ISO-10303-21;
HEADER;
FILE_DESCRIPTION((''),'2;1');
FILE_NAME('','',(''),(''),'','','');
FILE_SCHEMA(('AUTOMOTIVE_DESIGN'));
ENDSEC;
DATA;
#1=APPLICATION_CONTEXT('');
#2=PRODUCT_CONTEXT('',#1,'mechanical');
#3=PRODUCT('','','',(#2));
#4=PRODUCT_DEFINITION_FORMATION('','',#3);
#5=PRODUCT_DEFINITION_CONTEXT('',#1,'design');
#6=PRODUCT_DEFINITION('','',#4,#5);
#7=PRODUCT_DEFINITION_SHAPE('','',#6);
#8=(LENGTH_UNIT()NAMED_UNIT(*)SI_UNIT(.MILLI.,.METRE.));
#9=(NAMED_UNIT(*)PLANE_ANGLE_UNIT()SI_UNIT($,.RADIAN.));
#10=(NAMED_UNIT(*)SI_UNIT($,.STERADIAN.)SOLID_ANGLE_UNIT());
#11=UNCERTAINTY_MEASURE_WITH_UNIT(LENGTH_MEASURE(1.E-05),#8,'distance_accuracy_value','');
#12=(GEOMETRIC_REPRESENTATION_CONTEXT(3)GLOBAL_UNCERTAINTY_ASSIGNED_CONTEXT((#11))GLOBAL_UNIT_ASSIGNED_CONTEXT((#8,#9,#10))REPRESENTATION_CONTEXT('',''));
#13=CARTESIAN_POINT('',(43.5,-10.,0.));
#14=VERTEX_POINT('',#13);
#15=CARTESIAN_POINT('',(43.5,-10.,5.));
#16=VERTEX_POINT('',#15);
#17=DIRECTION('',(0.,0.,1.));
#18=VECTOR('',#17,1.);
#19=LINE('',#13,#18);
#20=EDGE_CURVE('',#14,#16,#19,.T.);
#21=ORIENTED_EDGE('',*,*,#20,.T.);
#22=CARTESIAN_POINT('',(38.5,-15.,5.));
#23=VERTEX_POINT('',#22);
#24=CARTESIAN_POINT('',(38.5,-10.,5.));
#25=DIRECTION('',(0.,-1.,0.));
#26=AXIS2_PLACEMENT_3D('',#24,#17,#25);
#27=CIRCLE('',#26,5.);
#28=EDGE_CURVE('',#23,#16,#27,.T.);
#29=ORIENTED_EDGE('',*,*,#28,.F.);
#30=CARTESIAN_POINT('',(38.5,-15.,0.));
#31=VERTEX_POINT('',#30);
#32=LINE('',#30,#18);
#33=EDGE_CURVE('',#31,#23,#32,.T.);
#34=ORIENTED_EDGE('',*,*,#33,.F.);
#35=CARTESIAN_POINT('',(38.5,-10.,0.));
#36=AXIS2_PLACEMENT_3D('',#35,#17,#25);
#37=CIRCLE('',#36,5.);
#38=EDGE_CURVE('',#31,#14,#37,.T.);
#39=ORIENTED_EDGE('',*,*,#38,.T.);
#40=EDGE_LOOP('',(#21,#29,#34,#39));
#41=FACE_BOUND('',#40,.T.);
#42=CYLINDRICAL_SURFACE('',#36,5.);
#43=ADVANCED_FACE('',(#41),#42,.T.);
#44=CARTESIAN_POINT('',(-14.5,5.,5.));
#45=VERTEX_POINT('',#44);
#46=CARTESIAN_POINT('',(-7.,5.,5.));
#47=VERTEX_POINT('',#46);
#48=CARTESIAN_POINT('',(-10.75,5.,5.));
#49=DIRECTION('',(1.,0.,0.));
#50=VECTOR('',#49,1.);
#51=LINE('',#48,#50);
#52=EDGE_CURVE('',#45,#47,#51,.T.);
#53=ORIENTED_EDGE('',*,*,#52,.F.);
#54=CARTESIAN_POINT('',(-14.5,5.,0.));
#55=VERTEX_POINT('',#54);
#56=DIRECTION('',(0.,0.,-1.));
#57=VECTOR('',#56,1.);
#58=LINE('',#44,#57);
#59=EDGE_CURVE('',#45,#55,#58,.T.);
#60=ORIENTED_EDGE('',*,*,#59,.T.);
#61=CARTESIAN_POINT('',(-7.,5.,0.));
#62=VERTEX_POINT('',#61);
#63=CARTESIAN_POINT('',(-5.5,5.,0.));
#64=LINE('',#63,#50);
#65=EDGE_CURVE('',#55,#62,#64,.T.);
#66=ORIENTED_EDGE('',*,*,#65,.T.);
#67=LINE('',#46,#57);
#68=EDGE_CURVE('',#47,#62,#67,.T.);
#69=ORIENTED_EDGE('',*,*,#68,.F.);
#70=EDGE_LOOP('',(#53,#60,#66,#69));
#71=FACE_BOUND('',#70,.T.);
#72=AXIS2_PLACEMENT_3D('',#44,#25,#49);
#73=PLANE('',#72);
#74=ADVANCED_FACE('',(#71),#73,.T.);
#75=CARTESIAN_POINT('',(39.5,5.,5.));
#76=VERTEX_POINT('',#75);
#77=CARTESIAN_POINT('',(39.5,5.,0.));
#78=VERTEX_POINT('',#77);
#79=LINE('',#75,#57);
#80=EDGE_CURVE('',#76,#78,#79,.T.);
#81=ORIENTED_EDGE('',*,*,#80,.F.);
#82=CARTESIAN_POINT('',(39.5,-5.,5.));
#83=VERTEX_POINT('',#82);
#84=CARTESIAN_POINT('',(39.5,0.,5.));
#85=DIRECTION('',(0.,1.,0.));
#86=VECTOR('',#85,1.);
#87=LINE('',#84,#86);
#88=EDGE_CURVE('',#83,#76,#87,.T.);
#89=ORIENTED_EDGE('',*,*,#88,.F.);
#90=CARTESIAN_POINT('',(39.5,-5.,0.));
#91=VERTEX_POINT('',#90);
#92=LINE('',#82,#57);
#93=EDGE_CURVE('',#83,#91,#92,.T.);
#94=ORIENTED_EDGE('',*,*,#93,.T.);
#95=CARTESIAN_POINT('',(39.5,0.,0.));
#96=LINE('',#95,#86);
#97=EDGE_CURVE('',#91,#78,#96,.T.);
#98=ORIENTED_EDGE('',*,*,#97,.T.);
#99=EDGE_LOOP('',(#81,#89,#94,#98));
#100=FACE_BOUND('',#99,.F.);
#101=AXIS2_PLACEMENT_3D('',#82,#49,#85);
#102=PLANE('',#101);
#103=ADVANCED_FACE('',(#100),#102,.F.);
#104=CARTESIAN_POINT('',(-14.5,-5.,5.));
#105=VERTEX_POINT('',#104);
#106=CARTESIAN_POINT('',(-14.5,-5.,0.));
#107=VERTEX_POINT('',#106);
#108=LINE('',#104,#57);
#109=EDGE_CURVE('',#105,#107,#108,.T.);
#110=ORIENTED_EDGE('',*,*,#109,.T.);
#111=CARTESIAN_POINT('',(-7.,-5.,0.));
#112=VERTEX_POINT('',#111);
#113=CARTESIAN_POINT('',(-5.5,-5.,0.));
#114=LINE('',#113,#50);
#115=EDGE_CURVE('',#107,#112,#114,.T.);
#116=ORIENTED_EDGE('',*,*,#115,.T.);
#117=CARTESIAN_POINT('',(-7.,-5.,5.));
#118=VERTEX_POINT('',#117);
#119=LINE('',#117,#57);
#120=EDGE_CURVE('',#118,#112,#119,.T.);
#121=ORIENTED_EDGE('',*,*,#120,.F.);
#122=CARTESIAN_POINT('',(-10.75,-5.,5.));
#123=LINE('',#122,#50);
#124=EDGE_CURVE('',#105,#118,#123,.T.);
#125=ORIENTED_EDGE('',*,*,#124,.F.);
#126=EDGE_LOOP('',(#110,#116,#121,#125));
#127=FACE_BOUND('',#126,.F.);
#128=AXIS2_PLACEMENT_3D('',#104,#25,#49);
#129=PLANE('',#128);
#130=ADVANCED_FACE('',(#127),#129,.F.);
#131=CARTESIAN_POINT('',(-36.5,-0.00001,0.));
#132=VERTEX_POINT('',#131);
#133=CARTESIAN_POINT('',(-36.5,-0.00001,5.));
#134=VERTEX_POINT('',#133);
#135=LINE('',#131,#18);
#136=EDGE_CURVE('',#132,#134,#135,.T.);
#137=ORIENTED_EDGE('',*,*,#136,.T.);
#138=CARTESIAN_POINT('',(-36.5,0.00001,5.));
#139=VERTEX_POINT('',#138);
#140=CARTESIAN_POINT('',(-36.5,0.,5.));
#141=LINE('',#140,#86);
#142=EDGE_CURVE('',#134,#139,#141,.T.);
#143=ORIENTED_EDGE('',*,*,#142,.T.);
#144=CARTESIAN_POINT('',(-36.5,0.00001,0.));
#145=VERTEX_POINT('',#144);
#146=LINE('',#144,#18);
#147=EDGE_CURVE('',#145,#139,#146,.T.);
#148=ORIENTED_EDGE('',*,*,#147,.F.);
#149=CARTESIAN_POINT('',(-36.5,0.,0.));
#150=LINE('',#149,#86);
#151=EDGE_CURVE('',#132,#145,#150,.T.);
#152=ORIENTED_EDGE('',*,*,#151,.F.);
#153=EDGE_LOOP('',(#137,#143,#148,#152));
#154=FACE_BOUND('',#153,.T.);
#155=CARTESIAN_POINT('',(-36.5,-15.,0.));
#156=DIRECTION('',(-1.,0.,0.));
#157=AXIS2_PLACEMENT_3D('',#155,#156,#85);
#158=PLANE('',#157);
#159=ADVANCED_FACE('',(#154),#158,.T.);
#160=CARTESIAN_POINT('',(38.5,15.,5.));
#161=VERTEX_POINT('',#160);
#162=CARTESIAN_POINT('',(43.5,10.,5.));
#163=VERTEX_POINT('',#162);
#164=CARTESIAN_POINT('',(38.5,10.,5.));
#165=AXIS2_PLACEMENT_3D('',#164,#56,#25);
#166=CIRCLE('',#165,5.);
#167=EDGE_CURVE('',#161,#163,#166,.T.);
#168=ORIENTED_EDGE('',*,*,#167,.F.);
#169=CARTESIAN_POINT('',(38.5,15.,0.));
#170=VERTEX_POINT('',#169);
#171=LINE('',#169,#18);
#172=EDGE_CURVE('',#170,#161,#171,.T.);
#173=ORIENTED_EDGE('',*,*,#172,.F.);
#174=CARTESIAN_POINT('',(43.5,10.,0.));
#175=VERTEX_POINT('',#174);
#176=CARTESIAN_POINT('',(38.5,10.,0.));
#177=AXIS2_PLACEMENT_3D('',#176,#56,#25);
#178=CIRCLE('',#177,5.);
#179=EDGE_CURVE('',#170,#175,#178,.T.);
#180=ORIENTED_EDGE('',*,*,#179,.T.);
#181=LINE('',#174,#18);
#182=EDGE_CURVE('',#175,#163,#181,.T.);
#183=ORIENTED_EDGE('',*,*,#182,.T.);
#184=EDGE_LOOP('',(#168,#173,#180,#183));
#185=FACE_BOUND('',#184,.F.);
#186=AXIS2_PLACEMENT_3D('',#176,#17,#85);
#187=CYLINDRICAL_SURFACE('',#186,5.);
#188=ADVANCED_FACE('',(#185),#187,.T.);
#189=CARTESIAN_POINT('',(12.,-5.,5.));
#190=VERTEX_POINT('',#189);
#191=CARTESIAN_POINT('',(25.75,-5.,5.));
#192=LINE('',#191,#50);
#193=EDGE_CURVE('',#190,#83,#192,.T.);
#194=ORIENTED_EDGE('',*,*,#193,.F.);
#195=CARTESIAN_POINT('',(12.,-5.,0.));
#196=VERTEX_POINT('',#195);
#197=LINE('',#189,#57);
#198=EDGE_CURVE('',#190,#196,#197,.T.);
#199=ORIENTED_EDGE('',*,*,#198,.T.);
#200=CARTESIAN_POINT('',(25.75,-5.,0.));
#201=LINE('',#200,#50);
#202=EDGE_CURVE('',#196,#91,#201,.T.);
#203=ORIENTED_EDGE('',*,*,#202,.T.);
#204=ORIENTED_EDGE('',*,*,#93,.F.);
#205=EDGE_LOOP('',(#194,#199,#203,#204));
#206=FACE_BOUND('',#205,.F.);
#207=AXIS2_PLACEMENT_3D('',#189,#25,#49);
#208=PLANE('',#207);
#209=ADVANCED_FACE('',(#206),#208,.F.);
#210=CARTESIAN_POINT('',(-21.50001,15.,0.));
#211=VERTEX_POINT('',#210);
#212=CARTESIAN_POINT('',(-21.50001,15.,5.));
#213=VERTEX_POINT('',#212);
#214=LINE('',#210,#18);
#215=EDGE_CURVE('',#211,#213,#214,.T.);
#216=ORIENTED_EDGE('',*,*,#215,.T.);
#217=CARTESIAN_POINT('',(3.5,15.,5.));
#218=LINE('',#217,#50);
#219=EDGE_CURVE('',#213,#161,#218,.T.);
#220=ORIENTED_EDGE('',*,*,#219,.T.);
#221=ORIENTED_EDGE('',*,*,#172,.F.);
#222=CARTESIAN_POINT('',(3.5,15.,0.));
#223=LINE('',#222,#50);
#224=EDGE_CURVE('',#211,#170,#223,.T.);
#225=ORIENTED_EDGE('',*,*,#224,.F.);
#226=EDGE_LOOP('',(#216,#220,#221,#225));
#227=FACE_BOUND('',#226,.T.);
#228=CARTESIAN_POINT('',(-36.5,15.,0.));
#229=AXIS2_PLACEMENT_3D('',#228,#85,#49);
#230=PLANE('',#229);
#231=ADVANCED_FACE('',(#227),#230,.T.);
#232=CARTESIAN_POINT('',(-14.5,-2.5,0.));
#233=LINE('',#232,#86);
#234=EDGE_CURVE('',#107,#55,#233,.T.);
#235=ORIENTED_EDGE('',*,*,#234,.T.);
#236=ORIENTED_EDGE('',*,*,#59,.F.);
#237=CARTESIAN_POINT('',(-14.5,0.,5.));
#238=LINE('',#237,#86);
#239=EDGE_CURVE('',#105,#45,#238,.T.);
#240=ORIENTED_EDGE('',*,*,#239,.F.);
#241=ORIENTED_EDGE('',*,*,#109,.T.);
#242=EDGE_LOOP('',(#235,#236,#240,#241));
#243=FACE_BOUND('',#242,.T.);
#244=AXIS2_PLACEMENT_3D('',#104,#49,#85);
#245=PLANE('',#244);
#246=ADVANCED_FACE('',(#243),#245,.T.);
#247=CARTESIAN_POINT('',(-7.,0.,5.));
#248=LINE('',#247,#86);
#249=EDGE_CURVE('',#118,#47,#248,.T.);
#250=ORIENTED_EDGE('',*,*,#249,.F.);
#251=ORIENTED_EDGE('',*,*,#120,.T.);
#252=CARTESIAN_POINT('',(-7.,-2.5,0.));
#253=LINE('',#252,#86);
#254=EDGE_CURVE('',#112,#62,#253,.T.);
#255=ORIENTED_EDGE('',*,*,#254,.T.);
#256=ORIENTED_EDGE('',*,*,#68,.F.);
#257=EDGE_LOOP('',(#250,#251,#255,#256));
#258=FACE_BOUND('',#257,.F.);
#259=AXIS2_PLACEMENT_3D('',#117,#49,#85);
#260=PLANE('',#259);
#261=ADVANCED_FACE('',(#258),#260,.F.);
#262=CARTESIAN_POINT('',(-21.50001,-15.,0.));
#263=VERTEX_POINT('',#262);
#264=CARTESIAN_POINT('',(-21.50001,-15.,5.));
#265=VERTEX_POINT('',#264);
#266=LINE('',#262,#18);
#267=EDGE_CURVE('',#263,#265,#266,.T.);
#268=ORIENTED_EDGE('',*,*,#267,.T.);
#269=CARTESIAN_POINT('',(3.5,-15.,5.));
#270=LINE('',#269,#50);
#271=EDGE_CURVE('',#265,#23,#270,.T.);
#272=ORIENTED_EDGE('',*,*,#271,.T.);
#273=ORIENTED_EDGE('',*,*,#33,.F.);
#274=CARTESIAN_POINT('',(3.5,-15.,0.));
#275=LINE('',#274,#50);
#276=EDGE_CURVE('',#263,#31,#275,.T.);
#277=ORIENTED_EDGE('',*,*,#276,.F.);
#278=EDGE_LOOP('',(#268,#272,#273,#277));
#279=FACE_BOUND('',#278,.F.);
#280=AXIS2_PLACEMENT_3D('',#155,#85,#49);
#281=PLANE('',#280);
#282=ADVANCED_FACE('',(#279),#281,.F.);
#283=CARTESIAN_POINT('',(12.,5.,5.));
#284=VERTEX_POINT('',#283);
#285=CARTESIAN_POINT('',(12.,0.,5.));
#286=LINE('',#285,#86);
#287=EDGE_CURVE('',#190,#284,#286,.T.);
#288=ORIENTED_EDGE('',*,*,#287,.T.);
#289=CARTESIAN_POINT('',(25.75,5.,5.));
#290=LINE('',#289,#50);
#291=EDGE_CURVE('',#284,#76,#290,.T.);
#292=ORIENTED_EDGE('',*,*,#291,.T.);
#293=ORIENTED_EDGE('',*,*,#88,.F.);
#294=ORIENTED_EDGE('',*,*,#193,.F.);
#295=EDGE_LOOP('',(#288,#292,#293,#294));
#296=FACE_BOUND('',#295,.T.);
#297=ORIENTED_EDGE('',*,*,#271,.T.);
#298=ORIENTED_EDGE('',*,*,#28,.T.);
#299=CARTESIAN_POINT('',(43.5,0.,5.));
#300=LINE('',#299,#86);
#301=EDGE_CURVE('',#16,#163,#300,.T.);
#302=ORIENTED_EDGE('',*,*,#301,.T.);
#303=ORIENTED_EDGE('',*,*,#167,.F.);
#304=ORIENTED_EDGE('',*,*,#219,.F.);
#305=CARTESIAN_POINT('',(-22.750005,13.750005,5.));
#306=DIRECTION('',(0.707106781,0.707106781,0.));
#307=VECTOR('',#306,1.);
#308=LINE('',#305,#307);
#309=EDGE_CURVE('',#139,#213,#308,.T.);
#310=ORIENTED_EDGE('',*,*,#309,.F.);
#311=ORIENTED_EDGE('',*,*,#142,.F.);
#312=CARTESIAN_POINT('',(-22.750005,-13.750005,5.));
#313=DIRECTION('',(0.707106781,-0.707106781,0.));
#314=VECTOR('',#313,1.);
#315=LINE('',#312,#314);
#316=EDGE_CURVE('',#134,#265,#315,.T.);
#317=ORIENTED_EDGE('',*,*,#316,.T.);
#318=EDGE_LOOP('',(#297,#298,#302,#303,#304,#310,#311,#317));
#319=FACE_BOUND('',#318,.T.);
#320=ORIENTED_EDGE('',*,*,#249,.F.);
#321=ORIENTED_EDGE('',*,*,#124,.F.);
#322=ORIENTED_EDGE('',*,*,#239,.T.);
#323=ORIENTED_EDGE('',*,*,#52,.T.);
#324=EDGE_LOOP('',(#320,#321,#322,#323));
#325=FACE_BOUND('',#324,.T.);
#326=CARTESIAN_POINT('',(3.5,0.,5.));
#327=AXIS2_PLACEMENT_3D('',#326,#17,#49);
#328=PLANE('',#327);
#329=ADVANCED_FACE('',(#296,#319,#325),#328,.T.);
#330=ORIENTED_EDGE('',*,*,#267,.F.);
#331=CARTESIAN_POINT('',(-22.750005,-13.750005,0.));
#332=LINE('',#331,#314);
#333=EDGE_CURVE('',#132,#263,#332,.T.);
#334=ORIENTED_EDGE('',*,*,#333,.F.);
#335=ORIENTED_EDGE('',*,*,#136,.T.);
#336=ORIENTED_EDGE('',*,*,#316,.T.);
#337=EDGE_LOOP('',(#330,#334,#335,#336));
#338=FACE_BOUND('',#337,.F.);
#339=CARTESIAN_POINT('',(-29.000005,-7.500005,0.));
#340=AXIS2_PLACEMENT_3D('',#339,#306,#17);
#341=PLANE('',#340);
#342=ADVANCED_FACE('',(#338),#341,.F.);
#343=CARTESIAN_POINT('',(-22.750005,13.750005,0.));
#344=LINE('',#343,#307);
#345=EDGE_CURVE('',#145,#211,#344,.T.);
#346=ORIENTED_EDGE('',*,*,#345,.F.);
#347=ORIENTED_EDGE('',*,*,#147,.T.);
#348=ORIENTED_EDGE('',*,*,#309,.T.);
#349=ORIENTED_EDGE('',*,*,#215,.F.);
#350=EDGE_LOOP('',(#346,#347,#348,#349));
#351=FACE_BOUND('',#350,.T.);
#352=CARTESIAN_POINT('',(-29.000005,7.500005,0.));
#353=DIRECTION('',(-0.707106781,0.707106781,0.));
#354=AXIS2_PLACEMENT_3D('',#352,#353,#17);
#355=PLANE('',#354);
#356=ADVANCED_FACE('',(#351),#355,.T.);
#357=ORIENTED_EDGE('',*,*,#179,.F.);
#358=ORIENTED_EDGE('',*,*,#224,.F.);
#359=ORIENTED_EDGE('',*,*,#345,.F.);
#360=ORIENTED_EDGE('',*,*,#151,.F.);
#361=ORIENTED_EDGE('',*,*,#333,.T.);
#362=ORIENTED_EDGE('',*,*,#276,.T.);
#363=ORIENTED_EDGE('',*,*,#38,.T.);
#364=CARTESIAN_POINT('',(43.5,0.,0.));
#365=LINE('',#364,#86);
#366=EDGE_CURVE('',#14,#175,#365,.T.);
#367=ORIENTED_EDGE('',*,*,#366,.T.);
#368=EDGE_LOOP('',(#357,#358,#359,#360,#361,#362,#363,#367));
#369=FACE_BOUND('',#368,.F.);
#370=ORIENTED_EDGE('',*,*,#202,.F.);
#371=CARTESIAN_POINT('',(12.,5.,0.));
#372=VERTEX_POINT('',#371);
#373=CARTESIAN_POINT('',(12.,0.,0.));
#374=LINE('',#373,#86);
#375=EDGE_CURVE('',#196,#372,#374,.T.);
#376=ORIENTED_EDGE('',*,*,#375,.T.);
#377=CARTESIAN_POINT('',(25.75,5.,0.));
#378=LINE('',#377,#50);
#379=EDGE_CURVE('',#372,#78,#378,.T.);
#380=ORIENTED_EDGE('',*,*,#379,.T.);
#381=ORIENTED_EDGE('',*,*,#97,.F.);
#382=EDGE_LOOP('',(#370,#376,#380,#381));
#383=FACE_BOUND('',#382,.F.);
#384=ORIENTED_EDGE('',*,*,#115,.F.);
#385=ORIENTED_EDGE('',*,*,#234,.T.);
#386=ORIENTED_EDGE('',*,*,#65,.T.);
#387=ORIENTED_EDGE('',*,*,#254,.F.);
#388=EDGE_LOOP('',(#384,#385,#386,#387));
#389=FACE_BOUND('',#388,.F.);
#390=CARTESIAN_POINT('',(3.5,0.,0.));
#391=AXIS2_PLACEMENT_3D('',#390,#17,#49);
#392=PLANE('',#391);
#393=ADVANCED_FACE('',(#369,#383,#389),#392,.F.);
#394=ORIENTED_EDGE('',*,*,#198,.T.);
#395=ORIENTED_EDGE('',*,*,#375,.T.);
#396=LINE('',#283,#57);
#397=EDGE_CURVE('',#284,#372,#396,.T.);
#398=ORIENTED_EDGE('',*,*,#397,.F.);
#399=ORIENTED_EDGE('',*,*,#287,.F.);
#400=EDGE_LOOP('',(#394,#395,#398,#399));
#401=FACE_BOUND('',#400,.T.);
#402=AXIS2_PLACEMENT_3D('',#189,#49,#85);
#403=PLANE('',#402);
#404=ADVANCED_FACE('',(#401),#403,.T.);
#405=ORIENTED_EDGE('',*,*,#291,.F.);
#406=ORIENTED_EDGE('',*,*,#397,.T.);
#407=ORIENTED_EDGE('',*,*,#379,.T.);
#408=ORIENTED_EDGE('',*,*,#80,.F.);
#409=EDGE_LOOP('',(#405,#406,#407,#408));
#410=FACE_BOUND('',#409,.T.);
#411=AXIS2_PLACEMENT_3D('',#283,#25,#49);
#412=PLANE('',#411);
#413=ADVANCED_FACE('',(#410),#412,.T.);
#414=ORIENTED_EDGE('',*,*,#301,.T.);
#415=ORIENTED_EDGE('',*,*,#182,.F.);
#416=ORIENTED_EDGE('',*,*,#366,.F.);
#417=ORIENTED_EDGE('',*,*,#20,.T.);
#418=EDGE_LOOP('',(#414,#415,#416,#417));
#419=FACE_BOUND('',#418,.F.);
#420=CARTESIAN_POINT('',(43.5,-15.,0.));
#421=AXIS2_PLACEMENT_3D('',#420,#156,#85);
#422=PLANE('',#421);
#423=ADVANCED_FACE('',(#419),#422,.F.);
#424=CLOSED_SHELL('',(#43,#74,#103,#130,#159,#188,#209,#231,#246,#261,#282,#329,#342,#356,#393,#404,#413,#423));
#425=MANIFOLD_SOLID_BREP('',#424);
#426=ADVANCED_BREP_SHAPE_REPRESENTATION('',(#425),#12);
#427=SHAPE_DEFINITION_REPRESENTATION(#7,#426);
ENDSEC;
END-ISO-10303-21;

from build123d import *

# Parameters (mm, degrees)
F0_W     = 80
F0_H     = 30
F1_DEPTH = 5
F2_W     = 7.5
F2_H     = 10
F3_DEPTH = 25
F4_W     = 27.5
F4_H     = 10
F5_DEPTH = 5
F6_SIZE  = 14.99999
F7_R     = 5


# Not quite as in the source:
# - a fillet or chamfer is up to 0.001 mm smaller than in the source, because OpenCascade refuses the exact size


with BuildPart() as f1:
    # F0 (on Top) → F1 (new body)
    with BuildSketch(Plane.XY):
        with Locations((3.5, 0)):
            Rectangle(F0_W, F0_H)
    extrude(amount=F1_DEPTH)

    # F2 (on face) → F3 (cut)
    with BuildSketch(Plane.XY.offset(5)):
        with Locations((-10.75, 0)):
            Rectangle(F2_W, F2_H)
    extrude(amount=-F3_DEPTH, mode=Mode.SUBTRACT)

    # F4 (on face) → F5 (cut)
    with BuildSketch(Plane.XY.offset(5)):
        with Locations((25.75, 0)):
            Rectangle(F4_W, F4_H)
    extrude(amount=-F5_DEPTH, mode=Mode.SUBTRACT)

    # F6 (size 15 in the source; OpenCascade refuses exactly that, so slightly less here)
    f6_edges = [f1.edges().sort_by_distance(p)[0] for p in [
        (-36.5, -15, 2.5),
        (-36.5, 15, 2.5),
    ]]
    chamfer(f6_edges, length=F6_SIZE)

    # F7
    f7_edges = [f1.edges().sort_by_distance(p)[0] for p in [
        (43.5, -15, 2.5),
        (43.5, 15, 2.5),
    ]]
    fillet(f7_edges, radius=F7_R)


solid = f1.part
